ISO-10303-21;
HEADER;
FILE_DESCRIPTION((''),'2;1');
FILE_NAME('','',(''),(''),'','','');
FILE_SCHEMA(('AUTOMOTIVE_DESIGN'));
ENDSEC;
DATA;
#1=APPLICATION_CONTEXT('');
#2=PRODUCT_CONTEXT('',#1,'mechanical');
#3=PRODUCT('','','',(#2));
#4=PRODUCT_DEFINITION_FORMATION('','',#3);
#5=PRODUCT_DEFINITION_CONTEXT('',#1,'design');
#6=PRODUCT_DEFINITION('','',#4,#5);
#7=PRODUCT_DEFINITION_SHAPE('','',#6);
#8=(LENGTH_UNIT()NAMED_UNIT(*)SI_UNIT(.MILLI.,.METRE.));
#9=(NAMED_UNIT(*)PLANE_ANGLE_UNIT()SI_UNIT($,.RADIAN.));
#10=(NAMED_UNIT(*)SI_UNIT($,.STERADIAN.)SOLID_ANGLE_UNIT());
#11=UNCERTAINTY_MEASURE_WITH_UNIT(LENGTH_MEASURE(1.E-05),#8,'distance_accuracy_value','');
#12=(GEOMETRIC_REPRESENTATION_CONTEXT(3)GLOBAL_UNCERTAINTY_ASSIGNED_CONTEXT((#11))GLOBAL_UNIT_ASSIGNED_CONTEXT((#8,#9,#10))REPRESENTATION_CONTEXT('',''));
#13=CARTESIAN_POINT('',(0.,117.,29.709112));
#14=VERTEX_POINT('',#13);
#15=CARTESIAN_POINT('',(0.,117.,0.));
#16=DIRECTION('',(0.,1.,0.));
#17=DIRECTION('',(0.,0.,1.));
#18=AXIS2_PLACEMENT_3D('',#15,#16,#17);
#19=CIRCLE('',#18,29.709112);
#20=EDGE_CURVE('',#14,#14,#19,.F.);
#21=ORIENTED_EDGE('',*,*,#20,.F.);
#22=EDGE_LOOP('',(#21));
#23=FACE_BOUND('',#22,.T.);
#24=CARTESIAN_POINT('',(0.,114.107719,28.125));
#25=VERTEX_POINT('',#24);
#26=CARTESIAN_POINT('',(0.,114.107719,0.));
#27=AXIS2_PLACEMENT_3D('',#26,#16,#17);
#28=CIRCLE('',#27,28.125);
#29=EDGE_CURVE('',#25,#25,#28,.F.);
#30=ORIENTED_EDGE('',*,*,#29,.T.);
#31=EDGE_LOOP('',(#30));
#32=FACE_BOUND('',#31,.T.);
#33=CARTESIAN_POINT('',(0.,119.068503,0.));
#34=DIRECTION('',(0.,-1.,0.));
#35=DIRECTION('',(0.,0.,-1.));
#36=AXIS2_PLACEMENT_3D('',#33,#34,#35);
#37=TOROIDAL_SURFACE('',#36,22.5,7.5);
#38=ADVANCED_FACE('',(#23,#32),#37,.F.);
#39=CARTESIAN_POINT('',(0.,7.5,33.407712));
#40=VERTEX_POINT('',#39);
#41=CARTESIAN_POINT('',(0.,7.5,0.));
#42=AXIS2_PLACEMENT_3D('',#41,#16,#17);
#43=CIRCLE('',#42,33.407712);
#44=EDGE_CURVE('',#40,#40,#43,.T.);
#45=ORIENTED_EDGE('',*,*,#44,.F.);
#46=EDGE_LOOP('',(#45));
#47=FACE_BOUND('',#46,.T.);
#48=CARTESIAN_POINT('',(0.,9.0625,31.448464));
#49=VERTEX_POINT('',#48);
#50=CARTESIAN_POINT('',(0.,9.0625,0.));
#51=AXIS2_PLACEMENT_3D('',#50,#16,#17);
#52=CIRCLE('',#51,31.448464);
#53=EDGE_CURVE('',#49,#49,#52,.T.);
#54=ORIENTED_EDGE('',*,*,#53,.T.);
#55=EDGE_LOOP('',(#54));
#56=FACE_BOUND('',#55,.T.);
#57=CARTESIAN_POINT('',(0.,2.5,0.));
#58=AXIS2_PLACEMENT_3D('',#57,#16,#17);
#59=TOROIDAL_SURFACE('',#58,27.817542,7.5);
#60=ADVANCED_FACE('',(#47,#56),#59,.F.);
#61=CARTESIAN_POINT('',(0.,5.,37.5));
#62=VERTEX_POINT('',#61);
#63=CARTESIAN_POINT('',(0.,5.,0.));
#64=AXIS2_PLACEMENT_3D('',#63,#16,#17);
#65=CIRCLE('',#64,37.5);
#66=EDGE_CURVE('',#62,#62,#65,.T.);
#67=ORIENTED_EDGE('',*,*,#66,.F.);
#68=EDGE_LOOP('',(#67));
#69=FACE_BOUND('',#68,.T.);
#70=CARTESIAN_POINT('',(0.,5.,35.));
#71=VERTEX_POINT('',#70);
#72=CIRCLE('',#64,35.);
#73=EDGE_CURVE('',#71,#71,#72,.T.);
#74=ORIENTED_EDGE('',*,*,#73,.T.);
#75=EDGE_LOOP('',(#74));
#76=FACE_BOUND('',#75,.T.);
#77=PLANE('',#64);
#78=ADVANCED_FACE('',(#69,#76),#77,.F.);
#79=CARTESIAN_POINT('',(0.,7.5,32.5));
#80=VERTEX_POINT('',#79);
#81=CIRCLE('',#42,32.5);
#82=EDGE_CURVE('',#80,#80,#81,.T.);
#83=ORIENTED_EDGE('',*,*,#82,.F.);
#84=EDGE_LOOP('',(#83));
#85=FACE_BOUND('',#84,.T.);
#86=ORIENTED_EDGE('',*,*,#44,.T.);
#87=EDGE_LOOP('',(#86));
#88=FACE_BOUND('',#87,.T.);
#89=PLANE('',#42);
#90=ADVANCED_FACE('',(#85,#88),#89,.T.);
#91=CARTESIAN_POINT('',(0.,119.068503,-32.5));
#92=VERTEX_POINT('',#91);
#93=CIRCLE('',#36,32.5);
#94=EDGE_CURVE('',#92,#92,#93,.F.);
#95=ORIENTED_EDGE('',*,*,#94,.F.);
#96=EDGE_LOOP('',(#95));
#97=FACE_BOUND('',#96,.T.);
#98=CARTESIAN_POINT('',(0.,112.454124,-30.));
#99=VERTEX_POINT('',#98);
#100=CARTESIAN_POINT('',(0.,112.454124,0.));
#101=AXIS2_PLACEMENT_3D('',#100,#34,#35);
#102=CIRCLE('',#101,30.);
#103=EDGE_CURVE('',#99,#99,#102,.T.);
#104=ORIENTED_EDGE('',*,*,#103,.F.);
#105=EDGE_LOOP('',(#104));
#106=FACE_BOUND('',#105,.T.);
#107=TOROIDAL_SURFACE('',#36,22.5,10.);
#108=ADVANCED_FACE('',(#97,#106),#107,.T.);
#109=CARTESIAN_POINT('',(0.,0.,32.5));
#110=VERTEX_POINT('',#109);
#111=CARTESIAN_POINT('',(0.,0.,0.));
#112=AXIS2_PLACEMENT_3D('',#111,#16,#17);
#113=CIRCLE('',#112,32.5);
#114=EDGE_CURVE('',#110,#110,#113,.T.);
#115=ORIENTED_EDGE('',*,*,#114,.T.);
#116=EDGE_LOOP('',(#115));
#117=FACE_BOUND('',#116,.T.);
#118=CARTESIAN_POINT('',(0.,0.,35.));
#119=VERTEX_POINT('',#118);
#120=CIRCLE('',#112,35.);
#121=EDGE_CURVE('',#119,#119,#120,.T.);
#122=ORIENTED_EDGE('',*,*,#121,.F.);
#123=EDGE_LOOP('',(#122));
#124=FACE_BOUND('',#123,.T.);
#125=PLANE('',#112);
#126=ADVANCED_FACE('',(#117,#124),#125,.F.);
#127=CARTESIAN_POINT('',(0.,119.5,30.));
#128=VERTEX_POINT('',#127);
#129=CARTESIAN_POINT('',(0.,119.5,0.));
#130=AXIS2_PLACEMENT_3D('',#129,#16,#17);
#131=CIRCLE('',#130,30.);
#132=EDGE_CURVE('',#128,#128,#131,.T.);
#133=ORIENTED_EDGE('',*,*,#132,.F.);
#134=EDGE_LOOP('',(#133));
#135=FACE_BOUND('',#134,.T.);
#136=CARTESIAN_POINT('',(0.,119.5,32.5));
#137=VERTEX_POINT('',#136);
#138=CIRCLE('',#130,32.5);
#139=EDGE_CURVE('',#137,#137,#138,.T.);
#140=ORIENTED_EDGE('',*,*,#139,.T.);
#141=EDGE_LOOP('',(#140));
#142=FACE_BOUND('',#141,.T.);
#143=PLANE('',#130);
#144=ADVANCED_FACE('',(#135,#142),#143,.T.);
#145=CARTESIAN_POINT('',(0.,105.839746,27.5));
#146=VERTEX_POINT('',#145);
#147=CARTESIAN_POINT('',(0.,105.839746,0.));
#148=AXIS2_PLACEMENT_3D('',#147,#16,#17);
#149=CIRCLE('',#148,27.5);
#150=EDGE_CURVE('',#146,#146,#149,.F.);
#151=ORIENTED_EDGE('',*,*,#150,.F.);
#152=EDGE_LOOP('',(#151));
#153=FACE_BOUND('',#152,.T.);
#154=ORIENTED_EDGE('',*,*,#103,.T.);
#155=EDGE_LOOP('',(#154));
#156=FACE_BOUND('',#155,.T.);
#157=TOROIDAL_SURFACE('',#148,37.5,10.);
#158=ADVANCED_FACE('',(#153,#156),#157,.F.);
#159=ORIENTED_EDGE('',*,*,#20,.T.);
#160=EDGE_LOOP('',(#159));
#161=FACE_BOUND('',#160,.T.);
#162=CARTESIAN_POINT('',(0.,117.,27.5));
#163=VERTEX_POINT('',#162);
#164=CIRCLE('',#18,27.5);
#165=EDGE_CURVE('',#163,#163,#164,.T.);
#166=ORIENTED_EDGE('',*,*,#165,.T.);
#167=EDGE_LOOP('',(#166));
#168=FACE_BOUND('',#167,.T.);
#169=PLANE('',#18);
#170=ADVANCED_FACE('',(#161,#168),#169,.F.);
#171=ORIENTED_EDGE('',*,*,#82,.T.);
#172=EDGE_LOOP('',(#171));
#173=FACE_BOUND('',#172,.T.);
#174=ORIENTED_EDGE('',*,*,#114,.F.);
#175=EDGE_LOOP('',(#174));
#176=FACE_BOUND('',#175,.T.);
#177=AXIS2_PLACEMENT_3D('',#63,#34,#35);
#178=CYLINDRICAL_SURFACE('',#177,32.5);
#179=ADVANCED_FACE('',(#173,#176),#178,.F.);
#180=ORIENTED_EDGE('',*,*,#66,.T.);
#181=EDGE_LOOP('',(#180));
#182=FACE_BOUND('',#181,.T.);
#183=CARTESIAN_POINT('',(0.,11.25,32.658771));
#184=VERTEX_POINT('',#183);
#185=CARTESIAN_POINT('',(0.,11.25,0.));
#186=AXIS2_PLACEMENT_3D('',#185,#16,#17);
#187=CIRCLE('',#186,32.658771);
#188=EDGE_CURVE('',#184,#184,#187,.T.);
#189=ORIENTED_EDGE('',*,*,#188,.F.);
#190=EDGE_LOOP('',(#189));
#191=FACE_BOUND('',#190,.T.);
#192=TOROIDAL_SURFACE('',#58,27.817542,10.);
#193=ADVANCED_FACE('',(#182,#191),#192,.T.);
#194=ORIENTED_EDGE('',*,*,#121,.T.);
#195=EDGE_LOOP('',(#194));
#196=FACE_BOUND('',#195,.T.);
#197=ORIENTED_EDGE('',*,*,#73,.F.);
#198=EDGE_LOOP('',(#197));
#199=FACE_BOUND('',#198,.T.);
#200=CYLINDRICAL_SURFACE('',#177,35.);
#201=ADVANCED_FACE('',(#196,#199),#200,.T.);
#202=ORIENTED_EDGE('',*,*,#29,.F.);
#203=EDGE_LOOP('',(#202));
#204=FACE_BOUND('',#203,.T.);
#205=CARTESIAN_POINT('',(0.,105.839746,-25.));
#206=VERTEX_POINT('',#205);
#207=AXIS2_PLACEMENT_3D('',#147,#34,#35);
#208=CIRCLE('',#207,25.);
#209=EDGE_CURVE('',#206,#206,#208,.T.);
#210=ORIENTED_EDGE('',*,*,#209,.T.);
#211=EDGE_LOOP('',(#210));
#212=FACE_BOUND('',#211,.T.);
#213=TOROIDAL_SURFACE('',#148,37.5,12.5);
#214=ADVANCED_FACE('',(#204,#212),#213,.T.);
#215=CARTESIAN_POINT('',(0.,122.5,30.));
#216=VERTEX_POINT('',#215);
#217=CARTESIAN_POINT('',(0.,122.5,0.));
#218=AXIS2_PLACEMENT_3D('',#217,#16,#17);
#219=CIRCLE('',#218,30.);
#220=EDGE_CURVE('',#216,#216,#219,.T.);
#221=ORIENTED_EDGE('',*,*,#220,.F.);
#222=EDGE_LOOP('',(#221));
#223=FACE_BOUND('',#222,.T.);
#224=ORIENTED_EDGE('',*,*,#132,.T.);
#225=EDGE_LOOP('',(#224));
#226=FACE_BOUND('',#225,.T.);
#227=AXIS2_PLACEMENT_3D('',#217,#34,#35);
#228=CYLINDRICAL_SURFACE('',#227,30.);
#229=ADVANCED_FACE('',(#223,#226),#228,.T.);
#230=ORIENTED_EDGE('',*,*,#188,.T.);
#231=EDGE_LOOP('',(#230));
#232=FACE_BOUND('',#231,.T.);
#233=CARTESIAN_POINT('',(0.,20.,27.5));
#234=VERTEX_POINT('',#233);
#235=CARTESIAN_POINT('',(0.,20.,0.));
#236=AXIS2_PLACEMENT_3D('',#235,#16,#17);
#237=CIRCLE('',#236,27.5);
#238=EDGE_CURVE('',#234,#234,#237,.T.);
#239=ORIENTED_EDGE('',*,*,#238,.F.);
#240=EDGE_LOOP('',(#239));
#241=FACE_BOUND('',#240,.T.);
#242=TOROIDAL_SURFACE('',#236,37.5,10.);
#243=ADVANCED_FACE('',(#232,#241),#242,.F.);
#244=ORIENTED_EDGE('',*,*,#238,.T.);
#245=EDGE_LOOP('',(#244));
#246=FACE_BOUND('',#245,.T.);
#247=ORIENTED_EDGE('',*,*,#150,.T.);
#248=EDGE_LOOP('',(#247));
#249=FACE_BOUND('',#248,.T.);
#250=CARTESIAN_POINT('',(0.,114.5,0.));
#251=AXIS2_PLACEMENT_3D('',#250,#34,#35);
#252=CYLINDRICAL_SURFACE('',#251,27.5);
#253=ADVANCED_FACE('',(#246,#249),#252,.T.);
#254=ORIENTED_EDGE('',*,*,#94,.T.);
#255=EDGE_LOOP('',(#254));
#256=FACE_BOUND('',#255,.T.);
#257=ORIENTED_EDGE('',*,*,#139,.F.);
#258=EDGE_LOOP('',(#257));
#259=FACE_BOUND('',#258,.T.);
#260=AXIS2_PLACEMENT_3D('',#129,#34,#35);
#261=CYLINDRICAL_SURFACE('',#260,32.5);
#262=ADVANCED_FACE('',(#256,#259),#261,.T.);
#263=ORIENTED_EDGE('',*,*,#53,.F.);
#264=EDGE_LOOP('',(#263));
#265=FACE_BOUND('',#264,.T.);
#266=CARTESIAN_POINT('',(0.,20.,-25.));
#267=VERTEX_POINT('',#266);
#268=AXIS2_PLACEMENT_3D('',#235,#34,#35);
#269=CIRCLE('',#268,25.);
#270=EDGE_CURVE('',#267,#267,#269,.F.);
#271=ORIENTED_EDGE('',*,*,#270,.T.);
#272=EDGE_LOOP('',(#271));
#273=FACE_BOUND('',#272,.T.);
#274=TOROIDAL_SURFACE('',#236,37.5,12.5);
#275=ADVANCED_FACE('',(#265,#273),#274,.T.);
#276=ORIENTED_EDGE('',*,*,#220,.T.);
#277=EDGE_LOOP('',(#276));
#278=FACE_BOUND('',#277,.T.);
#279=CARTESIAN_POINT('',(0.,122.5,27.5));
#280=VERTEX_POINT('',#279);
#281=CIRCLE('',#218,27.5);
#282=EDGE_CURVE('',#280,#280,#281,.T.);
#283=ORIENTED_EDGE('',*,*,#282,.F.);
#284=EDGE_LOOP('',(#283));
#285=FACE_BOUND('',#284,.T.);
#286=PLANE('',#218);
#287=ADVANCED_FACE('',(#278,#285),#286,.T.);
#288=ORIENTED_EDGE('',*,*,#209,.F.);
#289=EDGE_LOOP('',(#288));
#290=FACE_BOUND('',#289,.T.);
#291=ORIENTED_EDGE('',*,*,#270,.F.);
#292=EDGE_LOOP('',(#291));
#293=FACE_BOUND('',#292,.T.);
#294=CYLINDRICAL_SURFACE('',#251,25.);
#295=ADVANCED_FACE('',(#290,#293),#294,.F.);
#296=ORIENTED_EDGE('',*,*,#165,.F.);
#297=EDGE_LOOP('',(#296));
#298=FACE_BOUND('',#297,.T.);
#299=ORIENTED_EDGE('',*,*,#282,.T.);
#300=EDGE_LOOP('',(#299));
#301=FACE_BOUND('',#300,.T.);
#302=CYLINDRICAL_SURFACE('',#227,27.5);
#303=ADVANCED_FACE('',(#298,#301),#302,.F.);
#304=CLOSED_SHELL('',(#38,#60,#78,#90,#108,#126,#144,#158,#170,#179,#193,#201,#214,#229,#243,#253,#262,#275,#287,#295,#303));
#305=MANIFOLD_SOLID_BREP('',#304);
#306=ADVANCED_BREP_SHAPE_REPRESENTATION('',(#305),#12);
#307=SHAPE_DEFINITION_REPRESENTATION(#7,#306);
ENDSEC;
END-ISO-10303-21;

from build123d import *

# Parameters (mm, degrees)
SKETCH1_R           = 35
BOSS_EXTRUDE1_DEPTH = 5
SKETCH3_R           = 37.5
BOSS_EXTRUDE2_DEPTH = 5
SKETCH4_R           = 27.5
BOSS_EXTRUDE5_DEPTH = 104.5
SKETCH5_R           = 32.5
BOSS_EXTRUDE6_DEPTH = 5
SKETCH6_R           = 30
BOSS_EXTRUDE7_DEPTH = 3
FILLET1_R           = 10
FILLET2_R           = 10


# Read off the part's stored shape, not the designer's step: Shell1
with BuildPart() as part:
    # Sketch1 → Boss-Extrude1 (new body)
    with BuildSketch(Plane(origin=(0, 0, 0), x_dir=(1, 0, 0), z_dir=(0, 1, 0))):
        with Locations(Location((0, 0, 0), (0, 0, 270))):
            Circle(SKETCH1_R)
    extrude(amount=BOSS_EXTRUDE1_DEPTH)

    # Sketch3 → Boss-Extrude2 (add)
    with BuildSketch(Plane(origin=(0, 5, 0), x_dir=(1, 0, 0), z_dir=(0, 1, 0))):
        with Locations(Location((0, 0, 0), (0, 0, 270))):
            Circle(SKETCH3_R)
    extrude(amount=BOSS_EXTRUDE2_DEPTH)

    # Sketch4 → Boss-Extrude5 (add)
    with BuildSketch(Plane(origin=(0, 10, 0), x_dir=(1, 0, 0), z_dir=(0, 1, 0))):
        with Locations(Location((0, 0, 0), (0, 0, 270))):
            Circle(SKETCH4_R)
    extrude(amount=BOSS_EXTRUDE5_DEPTH)

    # Sketch5 → Boss-Extrude6 (add)
    with BuildSketch(Plane(origin=(0, 114.5, 0), x_dir=(1, 0, 0), z_dir=(0, 1, 0))):
        with Locations(Location((0, 0, 0), (0, 0, 270))):
            Circle(SKETCH5_R)
    extrude(amount=BOSS_EXTRUDE6_DEPTH)

    # Sketch6 → Boss-Extrude7 (add)
    with BuildSketch(Plane(origin=(0, 119.5, 0), x_dir=(1, 0, 0), z_dir=(0, 1, 0))):
        with Locations(Location((0, 0, 0), (0, 0, 270))):
            Circle(SKETCH6_R)
    extrude(amount=BOSS_EXTRUDE7_DEPTH)

    # Fillet1
    # the kernel refuses this fillet: 10 mm, written as the material it adds along each edge
    with BuildSketch(Plane(origin=(0, 10, 0), x_dir=(0, 0, 1), z_dir=(-1, 0, 0))) as fillet1_piece_1:
        with BuildLine():
            CenterArc((27.5 + FILLET1_R, FILLET1_R), FILLET1_R, 180, 90)
            Line((27.5 + FILLET1_R, 0), (27.5 + FILLET1_R, -FILLET1_R * 0.02))
            Line((27.5 + FILLET1_R, -FILLET1_R * 0.02), (27.5 - FILLET1_R * 0.02, -FILLET1_R * 0.02))
            Line((27.5 - FILLET1_R * 0.02, -FILLET1_R * 0.02), (27.5 - FILLET1_R * 0.02, FILLET1_R))
            Line((27.5 - FILLET1_R * 0.02, FILLET1_R), (27.5, FILLET1_R))
        make_face()
    revolve(axis=Axis((0, 10, 0), (0, 1, 0)))
    with BuildSketch(Plane(origin=(0, 114.5, 0), x_dir=(0, 0, 1), z_dir=(-1, 0, 0))) as fillet1_piece_2:
        with BuildLine():
            CenterArc((37.5, -8.660254038), FILLET1_R, 120, 60)
            Line((27.5, -8.660254038), (27.3, -8.660254038))
            Line((27.3, -8.660254038), (27.3, 0))
            Line((27.3, 0), (27.5, 0.2))
            ThreePointArc((27.5, 0.2), (30, 0.2), (32.4, 0.173205081))
            Line((32.4, 0.173205081), (32.5, 0))
        make_face()
    revolve(axis=Axis((0, 114.5, 0), (0, 1, 0)))

    # Fillet2
    # the kernel refuses this fillet: 10 mm, written as the material it takes off along each edge
    with BuildSketch(Plane(origin=(0, 114.5, 0), x_dir=(0, 0, 1), z_dir=(-1, 0, 0))) as fillet2_piece_1:
        with BuildLine():
            CenterArc((22.5, 4.568502517), FILLET2_R, 318.590377891, 41.409622109)
            Line((32.5, 4.568502517), (32.7, 4.568502517))
            Line((32.7, 4.568502517), (32.7, 0))
            Line((32.7, 0), (32.6, -0.173205081))
            ThreePointArc((32.6, -0.173205081), (31.293504258, -1.076098804), (30.15, -2.178163326))
            Line((30.15, -2.178163326), (30, -2.04587576))
        make_face()
    revolve(axis=Axis((0, 114.5, 0), (0, 1, 0)), mode=Mode.SUBTRACT)
    with BuildSketch(Plane(origin=(0, 10, 0), x_dir=(0, 0, 1), z_dir=(-1, 0, 0))) as fillet2_piece_2:
        with BuildLine():
            CenterArc((27.817541634, -7.5), FILLET2_R, 14.477512186, 46.567463442)
            Line((37.5, -5), (37.693649167, -4.95))
            ThreePointArc((37.693649167, -4.95), (37.7, -2.5), (37.7, 0))
            Line((37.7, 0), (37.5, 0.2))
            ThreePointArc((37.5, 0.2), (35.05, 0.511190802), (32.755595401, 1.425))
            Line((32.755595401, 1.425), (32.658770817, 1.25))
        make_face()
    revolve(axis=Axis((0, 10, 0), (0, 1, 0)), mode=Mode.SUBTRACT)

    # Shell1 outline → Shell1 (revolve, cut)
    with BuildSketch(Plane.XY):
        with BuildLine():
            ThreePointArc((28.125, 114.107718809), (29.07798837, 115.465716235), (29.709112104, 117))
            Line((29.709112104, 117), (27.5, 117))
            Line((27.5, 117), (27.5, 122.5))
            Line((27.5, 122.5), (0, 122.5))
            Line((0, 122.5), (0, 0))
            Line((0, 0), (32.5, 0))
            Line((32.5, 0), (32.5, 7.5))
            Line((32.5, 7.5), (33.407711578, 7.5))
            ThreePointArc((33.407711578, 7.5), (32.493809933, 8.363660529), (31.448463522, 9.0625))
            ThreePointArc((31.448463522, 9.0625), (26.732126348, 13.65154373), (25, 20))
            Line((25, 20), (25, 105.839745962))
            ThreePointArc((25, 105.839745962), (25.807320666, 110.259163345), (28.125, 114.107718809))
        make_face()
    revolve(axis=Axis((0, 0, 0), (0, 1, 0)), mode=Mode.SUBTRACT)


solid = part.part
